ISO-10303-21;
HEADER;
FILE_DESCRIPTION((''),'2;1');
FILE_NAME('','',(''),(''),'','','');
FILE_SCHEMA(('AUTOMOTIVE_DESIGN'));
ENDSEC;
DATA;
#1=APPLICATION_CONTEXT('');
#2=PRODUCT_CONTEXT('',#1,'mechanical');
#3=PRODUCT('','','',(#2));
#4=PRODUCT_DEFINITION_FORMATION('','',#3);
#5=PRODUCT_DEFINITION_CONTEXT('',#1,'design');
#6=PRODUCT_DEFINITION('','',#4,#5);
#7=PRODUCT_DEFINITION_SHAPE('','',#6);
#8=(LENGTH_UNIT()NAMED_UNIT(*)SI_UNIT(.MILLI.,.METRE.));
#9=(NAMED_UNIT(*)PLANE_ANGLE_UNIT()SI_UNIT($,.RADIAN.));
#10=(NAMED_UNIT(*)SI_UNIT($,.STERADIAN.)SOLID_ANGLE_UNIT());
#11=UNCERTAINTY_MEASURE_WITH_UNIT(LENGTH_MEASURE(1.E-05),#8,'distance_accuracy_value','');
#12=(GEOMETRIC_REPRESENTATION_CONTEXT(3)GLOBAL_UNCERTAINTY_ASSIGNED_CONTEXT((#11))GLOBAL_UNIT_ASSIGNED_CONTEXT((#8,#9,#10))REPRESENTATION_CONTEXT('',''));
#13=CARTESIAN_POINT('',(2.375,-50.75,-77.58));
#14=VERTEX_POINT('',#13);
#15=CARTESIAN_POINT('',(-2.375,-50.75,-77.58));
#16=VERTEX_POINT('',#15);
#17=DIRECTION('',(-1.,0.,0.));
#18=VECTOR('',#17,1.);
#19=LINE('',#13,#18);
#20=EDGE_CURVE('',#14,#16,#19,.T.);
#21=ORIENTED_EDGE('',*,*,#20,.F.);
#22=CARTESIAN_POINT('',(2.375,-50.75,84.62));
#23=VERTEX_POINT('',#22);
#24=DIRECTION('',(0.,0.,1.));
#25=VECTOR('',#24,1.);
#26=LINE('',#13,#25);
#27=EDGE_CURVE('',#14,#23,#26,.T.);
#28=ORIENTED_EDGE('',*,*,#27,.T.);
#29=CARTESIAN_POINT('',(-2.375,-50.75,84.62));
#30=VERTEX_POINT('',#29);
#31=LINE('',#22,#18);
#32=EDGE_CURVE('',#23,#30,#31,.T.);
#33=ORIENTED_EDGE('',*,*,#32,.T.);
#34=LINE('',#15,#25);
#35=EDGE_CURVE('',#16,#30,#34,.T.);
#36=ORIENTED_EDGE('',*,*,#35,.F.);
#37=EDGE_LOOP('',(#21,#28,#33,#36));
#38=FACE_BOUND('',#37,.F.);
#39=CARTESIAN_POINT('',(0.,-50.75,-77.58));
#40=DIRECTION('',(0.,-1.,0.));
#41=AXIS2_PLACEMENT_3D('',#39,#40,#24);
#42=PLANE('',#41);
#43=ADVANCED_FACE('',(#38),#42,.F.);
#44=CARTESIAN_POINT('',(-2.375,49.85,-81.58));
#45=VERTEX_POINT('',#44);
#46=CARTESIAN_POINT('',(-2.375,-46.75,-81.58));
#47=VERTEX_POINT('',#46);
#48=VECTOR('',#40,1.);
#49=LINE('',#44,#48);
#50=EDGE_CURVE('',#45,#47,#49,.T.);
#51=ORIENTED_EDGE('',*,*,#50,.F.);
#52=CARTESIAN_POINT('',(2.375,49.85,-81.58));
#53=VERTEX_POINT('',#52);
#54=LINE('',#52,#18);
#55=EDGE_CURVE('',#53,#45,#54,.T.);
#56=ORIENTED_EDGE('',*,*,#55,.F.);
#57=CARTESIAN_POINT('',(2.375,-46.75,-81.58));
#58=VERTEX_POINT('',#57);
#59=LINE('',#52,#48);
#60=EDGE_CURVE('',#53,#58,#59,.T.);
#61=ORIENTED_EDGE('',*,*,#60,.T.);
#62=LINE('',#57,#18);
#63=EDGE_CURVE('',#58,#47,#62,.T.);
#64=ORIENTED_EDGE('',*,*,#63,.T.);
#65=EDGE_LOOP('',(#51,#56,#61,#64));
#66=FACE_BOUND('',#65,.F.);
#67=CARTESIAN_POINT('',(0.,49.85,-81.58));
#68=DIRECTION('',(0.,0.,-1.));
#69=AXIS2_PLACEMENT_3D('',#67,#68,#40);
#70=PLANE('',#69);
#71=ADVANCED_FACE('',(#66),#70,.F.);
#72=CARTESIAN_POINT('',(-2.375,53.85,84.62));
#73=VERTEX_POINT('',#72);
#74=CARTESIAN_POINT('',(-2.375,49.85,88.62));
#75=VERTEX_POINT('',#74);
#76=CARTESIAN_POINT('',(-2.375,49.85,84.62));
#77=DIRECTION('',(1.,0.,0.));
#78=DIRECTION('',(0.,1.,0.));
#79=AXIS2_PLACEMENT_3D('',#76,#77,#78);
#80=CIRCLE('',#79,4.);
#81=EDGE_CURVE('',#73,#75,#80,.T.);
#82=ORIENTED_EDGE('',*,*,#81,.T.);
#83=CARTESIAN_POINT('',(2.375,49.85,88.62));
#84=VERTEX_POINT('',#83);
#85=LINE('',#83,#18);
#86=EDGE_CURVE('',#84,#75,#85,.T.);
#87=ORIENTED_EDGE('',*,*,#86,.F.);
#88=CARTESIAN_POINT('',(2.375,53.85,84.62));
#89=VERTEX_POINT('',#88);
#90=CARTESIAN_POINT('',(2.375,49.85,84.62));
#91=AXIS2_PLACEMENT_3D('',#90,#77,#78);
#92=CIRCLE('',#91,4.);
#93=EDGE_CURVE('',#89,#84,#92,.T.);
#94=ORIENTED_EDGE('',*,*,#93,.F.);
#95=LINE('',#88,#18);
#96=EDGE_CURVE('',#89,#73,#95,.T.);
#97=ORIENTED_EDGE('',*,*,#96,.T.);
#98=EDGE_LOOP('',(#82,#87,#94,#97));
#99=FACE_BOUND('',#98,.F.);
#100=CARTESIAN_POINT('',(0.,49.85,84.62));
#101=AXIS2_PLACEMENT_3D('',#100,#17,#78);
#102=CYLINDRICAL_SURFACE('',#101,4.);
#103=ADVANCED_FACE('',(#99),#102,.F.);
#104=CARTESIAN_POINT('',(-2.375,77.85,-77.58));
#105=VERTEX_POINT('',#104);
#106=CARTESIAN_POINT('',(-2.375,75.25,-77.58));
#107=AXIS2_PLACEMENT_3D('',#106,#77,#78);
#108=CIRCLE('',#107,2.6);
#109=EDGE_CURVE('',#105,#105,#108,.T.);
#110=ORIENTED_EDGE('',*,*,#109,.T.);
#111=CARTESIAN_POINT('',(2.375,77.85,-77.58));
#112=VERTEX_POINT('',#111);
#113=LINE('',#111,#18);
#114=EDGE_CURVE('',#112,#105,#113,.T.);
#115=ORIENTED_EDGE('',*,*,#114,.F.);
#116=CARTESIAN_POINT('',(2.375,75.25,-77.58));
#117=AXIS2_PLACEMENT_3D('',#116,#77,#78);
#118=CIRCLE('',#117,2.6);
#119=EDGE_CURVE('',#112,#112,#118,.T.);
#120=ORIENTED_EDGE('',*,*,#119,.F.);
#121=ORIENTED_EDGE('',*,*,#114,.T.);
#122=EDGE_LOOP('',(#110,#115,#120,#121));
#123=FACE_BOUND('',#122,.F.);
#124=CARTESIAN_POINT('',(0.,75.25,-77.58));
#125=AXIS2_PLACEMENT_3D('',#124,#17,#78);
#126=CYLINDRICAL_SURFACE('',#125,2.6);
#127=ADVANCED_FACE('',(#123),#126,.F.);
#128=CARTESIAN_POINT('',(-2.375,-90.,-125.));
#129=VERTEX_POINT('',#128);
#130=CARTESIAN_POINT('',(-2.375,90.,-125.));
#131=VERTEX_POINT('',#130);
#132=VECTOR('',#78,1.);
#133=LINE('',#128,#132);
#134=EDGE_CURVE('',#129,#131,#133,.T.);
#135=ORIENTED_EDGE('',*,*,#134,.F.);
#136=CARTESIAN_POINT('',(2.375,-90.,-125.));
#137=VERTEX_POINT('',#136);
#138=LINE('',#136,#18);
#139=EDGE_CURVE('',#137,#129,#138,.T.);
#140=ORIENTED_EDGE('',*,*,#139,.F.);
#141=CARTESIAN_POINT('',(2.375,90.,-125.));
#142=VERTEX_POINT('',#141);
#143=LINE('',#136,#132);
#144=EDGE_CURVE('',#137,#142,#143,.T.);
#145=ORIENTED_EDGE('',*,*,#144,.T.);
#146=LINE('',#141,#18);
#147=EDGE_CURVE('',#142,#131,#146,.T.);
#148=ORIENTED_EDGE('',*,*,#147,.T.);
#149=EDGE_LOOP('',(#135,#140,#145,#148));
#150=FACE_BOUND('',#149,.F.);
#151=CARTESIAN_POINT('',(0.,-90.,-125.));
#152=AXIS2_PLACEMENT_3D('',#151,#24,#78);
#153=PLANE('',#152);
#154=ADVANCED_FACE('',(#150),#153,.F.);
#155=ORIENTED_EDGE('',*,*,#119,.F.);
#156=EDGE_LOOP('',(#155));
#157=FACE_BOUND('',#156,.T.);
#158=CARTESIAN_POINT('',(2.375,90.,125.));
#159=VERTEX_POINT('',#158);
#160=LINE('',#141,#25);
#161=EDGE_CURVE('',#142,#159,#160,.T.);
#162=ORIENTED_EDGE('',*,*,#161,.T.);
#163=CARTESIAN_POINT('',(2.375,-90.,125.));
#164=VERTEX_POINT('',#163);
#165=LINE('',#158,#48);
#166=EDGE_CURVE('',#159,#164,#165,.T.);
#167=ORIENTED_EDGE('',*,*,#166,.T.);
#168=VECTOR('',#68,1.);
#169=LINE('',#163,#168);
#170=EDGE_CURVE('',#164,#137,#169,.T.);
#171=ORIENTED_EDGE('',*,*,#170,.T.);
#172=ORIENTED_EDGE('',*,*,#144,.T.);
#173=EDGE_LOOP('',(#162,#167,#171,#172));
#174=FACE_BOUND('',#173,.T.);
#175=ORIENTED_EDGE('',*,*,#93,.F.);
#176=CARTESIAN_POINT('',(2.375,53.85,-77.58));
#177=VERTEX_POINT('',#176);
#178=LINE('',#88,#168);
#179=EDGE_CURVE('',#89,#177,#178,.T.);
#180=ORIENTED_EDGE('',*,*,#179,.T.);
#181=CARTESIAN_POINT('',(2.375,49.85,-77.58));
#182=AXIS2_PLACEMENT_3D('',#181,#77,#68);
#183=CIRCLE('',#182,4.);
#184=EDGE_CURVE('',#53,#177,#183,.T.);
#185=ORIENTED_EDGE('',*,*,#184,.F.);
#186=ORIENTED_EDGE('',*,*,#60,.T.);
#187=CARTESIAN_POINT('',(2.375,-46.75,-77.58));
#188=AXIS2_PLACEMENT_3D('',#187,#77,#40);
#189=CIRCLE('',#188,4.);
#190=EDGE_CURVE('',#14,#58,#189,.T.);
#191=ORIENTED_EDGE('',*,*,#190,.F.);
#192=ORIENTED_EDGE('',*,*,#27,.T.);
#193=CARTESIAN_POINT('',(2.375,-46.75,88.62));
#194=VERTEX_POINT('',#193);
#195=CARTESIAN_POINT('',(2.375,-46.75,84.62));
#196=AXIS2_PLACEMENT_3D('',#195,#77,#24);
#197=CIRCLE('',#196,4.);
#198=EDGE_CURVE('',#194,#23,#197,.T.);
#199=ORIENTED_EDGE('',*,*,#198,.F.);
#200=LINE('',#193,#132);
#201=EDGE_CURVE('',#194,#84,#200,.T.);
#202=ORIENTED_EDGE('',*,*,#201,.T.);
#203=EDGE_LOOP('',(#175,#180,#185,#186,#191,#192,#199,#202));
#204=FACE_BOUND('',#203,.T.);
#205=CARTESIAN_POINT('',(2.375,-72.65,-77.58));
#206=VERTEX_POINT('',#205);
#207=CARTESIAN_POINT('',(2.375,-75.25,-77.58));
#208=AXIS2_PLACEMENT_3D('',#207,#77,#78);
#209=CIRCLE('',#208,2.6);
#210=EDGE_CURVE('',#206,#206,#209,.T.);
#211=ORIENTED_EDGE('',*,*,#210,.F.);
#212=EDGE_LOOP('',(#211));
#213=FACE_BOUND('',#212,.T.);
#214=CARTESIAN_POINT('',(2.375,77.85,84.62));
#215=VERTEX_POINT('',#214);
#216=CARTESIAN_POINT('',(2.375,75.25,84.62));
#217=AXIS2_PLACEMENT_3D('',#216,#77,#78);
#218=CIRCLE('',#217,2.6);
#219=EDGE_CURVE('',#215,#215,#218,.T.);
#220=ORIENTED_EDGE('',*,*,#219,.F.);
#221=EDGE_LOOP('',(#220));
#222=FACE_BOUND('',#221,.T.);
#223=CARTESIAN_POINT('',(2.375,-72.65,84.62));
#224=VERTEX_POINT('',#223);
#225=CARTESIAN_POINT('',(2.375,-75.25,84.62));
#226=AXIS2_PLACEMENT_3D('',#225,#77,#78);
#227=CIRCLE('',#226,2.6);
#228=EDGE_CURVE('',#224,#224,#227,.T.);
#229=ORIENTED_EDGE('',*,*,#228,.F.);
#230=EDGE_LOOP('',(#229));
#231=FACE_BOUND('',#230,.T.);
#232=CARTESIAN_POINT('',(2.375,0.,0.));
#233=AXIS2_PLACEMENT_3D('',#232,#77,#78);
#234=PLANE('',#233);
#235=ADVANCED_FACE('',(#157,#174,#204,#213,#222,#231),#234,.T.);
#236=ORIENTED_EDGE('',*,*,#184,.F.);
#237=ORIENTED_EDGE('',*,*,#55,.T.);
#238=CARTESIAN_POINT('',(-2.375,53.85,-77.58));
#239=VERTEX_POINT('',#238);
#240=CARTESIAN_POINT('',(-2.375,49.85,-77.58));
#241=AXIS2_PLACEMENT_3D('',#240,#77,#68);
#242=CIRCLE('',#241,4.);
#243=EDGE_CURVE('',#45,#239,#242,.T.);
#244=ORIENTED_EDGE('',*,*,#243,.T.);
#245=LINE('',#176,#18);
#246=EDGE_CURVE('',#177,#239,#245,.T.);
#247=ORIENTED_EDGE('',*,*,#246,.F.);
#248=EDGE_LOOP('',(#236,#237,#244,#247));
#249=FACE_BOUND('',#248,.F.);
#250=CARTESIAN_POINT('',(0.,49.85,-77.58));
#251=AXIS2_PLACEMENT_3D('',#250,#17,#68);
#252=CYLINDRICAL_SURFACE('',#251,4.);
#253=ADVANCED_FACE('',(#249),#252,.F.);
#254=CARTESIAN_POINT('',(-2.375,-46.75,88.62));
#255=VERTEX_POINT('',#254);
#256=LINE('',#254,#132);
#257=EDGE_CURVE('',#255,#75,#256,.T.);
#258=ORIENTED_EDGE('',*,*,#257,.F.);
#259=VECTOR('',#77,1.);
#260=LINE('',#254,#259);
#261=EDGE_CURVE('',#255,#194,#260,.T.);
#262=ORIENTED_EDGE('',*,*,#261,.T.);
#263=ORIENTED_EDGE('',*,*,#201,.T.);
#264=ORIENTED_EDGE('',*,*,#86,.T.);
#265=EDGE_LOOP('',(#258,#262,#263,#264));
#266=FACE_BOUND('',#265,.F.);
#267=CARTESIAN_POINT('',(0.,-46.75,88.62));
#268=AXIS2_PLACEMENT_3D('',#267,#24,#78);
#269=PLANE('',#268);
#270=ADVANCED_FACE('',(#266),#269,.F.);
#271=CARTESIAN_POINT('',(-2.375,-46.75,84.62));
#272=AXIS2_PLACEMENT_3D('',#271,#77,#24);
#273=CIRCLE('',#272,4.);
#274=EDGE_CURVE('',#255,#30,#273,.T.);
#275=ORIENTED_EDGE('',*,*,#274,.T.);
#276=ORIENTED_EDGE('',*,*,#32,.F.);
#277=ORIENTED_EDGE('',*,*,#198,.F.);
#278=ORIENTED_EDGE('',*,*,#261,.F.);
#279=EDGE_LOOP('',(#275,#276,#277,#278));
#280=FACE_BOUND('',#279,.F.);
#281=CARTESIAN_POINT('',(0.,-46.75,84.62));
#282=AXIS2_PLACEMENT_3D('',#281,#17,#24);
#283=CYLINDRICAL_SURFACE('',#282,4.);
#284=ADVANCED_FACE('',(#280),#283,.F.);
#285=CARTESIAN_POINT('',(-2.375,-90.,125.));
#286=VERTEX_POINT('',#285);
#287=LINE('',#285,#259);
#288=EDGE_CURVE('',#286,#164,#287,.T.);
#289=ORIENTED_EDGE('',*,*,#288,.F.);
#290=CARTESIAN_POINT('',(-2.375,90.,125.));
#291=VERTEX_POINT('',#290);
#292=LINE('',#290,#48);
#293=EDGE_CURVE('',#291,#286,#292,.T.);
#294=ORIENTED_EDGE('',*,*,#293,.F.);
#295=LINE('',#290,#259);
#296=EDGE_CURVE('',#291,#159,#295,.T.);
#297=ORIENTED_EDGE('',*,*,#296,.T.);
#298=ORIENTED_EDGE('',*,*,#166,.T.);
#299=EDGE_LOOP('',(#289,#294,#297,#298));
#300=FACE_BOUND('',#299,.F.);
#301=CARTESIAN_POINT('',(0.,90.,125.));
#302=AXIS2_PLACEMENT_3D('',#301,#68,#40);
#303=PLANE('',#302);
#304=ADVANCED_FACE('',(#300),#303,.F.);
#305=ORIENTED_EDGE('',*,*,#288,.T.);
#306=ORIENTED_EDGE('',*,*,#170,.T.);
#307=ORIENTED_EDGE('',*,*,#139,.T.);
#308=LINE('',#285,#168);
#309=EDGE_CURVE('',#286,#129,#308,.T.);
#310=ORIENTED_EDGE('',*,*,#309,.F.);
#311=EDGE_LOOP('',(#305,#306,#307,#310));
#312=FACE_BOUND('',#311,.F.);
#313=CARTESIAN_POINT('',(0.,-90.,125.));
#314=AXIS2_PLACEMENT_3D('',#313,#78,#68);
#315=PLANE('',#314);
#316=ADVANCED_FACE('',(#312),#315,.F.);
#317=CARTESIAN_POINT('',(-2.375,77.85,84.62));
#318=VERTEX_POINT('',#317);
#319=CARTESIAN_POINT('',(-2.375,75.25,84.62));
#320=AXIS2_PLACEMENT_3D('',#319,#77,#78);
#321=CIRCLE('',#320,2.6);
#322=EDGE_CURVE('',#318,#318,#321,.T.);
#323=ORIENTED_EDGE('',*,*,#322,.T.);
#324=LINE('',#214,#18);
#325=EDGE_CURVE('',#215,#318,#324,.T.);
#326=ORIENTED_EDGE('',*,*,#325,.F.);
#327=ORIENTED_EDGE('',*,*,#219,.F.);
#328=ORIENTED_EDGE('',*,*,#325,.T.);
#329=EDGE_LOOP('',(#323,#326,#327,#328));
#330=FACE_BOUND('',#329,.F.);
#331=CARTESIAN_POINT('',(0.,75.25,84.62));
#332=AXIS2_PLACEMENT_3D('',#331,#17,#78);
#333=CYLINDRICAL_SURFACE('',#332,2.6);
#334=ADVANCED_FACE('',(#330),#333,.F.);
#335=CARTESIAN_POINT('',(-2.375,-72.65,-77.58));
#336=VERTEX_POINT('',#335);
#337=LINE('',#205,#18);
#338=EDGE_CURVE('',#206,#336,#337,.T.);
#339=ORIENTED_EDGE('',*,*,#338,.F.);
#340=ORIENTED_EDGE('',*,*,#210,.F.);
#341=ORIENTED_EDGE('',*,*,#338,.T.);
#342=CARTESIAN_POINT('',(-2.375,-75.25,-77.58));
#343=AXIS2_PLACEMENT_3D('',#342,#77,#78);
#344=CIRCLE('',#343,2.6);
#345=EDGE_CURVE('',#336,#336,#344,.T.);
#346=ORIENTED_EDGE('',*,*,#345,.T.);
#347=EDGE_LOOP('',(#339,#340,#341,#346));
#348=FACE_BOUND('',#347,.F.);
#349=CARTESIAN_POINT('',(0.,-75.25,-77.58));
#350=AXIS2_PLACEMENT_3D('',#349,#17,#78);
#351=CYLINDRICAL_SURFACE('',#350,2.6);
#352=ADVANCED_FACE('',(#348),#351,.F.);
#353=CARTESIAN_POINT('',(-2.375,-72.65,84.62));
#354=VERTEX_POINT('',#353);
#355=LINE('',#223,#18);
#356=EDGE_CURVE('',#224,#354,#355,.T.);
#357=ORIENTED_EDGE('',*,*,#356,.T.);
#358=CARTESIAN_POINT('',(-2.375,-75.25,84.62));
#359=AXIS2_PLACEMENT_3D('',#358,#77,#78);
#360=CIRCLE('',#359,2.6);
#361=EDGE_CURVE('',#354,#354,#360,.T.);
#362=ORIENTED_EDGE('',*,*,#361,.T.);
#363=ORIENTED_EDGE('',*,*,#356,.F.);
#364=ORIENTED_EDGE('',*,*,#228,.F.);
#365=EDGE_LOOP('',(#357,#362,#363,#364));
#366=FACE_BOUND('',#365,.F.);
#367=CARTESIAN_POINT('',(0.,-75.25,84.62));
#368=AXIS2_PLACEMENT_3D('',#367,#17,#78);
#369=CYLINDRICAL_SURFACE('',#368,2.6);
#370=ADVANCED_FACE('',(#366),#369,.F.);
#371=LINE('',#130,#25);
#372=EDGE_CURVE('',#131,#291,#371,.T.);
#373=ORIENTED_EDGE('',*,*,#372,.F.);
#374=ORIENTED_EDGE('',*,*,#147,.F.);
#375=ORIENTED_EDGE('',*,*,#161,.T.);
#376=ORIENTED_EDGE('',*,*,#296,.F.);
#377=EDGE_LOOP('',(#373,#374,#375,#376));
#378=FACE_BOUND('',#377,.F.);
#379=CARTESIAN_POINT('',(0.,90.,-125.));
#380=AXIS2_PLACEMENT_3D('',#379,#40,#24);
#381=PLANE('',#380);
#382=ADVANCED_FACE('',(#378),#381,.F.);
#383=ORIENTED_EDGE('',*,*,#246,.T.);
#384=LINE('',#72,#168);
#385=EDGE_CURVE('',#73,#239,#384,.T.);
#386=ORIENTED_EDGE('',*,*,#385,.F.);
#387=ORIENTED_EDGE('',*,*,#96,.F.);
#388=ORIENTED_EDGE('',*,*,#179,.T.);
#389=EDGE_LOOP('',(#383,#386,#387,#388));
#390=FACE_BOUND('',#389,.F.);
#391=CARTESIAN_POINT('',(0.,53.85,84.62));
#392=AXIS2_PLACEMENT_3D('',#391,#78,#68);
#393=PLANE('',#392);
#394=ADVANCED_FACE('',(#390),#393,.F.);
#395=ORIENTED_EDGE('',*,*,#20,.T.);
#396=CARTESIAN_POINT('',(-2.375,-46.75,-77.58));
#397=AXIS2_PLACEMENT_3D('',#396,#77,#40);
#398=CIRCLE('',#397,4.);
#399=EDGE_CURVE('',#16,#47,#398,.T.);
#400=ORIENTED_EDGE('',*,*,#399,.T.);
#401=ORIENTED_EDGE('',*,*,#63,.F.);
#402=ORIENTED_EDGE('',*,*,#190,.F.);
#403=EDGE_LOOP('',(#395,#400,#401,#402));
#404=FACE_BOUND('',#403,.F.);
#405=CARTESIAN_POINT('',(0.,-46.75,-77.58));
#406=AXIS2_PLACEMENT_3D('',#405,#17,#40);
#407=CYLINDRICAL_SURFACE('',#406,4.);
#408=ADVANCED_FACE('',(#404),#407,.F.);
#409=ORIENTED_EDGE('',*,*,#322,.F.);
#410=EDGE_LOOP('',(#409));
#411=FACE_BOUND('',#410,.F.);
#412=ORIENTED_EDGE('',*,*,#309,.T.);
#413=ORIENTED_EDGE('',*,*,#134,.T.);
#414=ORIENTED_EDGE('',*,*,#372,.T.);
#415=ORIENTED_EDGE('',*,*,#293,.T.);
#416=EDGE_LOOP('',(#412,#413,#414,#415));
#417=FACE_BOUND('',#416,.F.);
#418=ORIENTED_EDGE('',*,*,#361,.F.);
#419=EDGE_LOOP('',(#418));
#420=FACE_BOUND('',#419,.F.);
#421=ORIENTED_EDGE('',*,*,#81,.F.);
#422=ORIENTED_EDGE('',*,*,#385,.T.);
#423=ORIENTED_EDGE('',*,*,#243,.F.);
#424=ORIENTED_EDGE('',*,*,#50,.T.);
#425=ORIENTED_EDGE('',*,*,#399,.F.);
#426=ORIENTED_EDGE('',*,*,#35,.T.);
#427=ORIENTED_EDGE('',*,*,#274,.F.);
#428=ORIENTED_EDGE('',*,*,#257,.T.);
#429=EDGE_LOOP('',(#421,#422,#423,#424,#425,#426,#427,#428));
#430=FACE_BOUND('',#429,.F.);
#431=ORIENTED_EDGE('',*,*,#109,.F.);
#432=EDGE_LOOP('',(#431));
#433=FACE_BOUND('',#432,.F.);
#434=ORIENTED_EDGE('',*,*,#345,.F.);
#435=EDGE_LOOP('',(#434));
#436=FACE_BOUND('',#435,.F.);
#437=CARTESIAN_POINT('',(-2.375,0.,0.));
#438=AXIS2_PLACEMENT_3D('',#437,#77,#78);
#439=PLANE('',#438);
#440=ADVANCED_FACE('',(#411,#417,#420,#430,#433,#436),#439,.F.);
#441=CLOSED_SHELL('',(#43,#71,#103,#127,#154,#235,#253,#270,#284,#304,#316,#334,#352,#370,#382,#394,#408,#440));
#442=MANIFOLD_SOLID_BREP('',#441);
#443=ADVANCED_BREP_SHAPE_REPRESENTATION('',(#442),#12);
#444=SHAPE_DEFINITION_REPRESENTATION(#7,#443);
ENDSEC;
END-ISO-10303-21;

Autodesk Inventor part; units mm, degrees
ref_plane "YZ Plane" through (0, 0, 0) normal (1, 0, 0) x (0, 1, 0)
ref_plane "XZ Plane" through (0, 0, 0) normal (0, 1, 0) x (-1, 0, 0)
ref_plane "XY Plane" through (0, 0, 0) normal (0, 0, 1) x (1, 0, 0)
sketch "Face" plane through (0, 0, 0) normal (0, 0, 1) x (1, 0, 0)
  line L0 (38.5, 208.87) -> (135.1, 208.87)
  arc A0 (38.5, 208.87) -> (34.5, 204.87) centre (38.5, 204.87) ccw
  circle A1 centre (10, 204.87) radius 2.6
  line L1 (175.25, 245.25) -> (-4.75, 245.25)
  line L2 (139.1, 204.87) -> (139.1, 42.67)
  line L3 (34.5, 42.67) -> (34.5, 204.87)
  line L4 (175.25, -4.75) -> (175.25, 245.25)
  line L5 (-4.75, 245.25) -> (-4.75, -4.75)
  circle A2 centre (160.5, 42.67) radius 2.6
  arc A3 (135.1, 38.67) -> (139.1, 42.67) centre (135.1, 42.67) ccw
  arc A4 (34.5, 42.67) -> (38.5, 38.67) centre (38.5, 42.67) ccw
  circle A5 centre (10, 42.67) radius 2.6
  line L6 (-4.75, -4.75) -> (175.25, -4.75)
  line L7 (135.1, 38.67) -> (38.5, 38.67)
  arc A6 (139.1, 204.87) -> (135.1, 208.87) centre (135.1, 204.87) ccw
  circle A7 centre (160.5, 204.87) radius 2.6
  point P0 (84.3959, 120.382)
  point P1 (0, 0)
sketch "Sketch1" plane through (0, 0, 0) normal (1, 0, 0) x (0, 1, 0)
  line L0 (-46.75, 88.62) -> (49.85, 88.62)
  arc A0 (-46.75, 88.62) -> (-50.75, 84.62) centre (-46.75, 84.62) ccw
  circle A1 centre (-75.25, 84.62) radius 2.6
  line L1 (90, 125) -> (-90, 125)
  line L2 (53.85, 84.62) -> (53.85, -77.58)
  line L3 (-50.75, -77.58) -> (-50.75, 84.62)
  line L4 (90, -125) -> (90, 125)
  line L5 (-90, 125) -> (-90, -125)
  circle A2 centre (75.25, -77.58) radius 2.6
  arc A3 (49.85, -81.58) -> (53.85, -77.58) centre (49.85, -77.58) ccw
  arc A4 (-50.75, -77.58) -> (-46.75, -81.58) centre (-46.75, -77.58) ccw
  circle A5 centre (-75.25, -77.58) radius 2.6
  line L6 (-90, -125) -> (90, -125)
  line L7 (49.85, -81.58) -> (-46.75, -81.58)
  arc A6 (53.85, 84.62) -> (49.85, 88.62) centre (49.85, 84.62) ccw
  circle A7 centre (75.25, 84.62) radius 2.6
  point P0 (0, 0)
  point P1 (0, 125)
  point P2 (90, 0)
extrude "Extrusion1" add sketch "Sketch1" along normal mid plane 4.75
properties part number "BREEZE-M06"
